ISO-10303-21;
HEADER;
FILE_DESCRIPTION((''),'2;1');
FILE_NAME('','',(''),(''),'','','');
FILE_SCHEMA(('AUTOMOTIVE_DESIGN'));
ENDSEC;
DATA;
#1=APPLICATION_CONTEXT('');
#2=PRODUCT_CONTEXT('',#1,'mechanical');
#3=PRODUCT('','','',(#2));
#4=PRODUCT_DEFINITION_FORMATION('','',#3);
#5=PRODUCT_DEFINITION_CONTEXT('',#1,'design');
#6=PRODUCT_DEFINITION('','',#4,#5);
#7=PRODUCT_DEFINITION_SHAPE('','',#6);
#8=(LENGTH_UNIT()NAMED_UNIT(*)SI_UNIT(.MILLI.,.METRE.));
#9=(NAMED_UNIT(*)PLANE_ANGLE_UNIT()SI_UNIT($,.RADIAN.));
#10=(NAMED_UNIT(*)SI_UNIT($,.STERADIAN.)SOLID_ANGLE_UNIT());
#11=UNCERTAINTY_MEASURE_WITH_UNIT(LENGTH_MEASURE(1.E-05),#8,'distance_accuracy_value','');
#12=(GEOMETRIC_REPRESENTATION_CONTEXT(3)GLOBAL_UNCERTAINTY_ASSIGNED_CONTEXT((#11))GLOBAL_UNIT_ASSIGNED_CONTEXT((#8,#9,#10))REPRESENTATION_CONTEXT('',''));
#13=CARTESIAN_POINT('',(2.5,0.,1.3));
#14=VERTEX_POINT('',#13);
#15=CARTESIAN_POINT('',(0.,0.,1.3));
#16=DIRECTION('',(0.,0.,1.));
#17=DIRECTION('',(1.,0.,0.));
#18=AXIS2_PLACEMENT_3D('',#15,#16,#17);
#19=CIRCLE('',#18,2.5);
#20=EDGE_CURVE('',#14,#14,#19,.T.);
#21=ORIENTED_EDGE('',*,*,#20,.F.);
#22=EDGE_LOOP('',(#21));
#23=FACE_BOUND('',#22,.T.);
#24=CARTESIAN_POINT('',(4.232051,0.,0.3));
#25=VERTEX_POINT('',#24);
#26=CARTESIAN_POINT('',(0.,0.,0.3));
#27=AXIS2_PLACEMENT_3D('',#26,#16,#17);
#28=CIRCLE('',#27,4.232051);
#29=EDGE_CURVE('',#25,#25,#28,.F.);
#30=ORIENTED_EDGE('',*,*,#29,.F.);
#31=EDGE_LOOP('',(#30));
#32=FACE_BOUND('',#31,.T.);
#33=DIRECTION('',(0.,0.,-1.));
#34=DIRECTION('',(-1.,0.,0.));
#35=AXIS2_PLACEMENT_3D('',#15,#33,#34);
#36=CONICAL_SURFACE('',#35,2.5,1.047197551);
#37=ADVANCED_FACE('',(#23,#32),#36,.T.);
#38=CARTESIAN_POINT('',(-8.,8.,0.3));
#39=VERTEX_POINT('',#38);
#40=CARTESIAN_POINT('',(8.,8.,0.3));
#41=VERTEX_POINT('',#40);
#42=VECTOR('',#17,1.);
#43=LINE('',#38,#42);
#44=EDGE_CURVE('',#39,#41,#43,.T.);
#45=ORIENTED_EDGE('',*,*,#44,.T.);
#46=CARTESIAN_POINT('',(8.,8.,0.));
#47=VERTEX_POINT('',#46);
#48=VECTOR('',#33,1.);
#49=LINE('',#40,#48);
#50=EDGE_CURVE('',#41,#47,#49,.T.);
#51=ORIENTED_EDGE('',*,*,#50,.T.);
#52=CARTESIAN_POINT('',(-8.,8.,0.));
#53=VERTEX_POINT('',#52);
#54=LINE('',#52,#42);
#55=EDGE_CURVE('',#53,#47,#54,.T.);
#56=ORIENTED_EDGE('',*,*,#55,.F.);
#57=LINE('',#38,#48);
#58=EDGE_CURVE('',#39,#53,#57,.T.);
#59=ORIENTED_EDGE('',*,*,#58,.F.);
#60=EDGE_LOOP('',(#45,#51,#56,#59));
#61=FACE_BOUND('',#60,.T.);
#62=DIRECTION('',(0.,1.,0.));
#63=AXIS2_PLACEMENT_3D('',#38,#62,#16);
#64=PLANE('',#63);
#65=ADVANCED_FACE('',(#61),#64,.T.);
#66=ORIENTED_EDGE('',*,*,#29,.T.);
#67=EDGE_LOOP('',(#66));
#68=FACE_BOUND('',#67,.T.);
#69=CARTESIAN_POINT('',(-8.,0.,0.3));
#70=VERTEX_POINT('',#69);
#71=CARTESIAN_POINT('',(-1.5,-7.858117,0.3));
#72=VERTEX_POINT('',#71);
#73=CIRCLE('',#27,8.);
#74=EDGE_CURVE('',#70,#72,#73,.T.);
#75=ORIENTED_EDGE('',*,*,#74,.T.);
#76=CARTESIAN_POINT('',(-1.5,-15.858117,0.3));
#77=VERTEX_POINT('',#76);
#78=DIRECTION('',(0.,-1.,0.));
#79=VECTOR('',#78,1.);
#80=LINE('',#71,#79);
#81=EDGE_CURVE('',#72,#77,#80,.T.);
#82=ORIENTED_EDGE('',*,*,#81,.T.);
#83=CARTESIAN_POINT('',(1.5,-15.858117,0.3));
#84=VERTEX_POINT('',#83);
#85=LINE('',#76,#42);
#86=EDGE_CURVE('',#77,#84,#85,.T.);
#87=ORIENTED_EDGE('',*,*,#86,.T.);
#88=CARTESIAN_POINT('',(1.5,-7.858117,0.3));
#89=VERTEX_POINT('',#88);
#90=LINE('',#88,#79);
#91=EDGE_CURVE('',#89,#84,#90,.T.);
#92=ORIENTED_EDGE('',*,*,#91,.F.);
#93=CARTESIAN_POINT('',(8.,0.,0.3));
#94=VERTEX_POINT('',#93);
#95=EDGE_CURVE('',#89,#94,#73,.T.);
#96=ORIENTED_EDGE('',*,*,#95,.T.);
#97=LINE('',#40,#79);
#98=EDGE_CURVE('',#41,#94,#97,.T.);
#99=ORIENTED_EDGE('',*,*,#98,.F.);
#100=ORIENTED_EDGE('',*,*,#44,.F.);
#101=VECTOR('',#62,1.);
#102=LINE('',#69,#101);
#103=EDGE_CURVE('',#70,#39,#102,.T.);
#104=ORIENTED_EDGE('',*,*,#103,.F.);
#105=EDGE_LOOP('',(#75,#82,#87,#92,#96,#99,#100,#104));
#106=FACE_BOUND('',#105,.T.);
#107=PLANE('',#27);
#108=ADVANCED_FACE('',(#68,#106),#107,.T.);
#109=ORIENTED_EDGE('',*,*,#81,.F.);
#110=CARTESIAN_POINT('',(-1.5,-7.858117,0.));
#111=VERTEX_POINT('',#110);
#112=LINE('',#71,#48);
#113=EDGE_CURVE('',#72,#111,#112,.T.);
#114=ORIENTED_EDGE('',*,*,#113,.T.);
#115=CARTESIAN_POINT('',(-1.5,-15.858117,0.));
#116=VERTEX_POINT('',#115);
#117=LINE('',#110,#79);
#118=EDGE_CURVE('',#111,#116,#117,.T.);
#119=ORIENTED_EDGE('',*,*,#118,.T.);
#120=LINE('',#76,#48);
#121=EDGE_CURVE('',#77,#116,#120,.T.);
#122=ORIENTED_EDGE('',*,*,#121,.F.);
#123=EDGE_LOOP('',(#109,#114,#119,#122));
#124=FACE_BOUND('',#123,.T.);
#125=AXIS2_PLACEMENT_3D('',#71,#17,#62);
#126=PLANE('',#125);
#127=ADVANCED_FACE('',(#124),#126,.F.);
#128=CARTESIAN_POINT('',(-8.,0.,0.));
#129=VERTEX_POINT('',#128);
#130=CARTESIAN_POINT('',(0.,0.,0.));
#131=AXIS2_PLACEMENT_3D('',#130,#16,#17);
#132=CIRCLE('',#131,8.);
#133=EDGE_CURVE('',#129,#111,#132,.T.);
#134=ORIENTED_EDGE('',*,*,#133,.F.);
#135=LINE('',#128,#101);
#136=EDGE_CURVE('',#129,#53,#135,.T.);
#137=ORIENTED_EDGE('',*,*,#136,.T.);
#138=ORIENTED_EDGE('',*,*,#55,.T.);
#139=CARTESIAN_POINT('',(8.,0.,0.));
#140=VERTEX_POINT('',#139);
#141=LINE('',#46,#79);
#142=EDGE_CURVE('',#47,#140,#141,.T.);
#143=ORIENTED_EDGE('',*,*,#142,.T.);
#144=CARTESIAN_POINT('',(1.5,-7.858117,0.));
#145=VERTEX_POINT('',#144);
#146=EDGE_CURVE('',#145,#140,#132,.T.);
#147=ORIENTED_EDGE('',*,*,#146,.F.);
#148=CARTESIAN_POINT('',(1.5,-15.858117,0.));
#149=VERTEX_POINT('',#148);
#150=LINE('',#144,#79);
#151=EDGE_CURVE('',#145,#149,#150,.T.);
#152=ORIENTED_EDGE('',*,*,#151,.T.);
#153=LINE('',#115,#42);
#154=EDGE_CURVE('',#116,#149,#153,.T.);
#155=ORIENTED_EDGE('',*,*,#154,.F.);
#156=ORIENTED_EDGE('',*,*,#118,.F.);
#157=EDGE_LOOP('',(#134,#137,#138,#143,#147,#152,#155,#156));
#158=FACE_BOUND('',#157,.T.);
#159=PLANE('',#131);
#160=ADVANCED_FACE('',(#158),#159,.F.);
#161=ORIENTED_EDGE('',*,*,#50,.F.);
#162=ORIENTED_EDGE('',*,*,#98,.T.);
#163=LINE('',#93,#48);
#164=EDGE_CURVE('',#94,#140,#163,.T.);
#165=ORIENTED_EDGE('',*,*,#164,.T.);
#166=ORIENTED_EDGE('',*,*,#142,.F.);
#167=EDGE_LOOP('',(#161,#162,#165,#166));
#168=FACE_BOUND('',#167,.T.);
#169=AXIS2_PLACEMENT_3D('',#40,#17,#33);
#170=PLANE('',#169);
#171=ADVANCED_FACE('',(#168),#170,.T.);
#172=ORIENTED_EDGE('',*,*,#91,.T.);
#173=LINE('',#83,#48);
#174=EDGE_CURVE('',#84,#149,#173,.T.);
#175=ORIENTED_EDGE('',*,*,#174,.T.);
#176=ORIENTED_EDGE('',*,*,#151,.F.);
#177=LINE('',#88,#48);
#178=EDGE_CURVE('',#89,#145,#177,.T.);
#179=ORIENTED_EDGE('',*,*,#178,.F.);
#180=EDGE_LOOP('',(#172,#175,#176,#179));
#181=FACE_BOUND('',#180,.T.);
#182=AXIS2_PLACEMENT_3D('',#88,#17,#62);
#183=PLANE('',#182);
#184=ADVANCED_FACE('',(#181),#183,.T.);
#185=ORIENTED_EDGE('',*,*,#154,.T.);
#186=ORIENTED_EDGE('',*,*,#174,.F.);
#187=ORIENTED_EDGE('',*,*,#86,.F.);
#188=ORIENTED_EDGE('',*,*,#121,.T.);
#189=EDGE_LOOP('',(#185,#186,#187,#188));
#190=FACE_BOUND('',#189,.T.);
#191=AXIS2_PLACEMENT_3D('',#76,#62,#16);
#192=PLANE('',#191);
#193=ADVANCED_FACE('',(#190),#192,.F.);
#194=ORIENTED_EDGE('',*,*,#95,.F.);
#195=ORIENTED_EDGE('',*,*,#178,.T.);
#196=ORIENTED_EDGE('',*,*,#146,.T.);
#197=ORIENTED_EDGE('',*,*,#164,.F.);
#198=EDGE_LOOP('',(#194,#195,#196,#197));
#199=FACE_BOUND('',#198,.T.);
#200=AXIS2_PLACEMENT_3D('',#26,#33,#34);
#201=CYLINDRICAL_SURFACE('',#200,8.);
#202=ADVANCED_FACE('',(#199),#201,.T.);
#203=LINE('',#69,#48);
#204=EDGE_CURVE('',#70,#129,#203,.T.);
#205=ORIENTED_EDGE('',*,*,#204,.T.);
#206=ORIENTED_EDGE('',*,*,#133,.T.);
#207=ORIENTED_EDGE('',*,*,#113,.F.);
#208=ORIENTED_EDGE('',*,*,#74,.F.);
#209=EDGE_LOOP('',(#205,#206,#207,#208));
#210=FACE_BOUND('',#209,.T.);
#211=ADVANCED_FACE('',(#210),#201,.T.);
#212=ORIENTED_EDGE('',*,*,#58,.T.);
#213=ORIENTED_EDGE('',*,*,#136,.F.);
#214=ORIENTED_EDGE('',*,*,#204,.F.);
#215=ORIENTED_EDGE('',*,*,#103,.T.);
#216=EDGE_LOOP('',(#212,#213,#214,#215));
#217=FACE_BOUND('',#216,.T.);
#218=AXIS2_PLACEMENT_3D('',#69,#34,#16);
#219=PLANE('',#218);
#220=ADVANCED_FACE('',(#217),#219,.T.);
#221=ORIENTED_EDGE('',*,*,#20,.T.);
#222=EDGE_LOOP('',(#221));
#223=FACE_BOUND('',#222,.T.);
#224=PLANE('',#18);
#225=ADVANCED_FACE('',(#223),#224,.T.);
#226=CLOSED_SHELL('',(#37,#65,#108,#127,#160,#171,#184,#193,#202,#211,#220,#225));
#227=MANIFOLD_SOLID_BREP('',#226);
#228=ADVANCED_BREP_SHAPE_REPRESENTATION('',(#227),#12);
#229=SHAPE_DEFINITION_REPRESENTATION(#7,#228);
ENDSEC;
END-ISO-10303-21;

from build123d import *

# Parameters (mm, degrees)
EXTRUDE_1_DEPTH  = 0.3
SKETCH_2_R       = 2.5
EXTRUDE_2_DEPTH  = 1
CHAMFER_1_SIZE   = 1.732050808
CHAMFER_1_SIZE_2 = 1


with BuildPart() as part:
    # 草图1 → 凸台-拉伸1 (new body)
    with BuildSketch(Plane.XY):
        with BuildLine():
            Line((-8, 0), (-8, 8))
            Line((-8, 8), (8, 8))
            Line((8, 8), (8, 0))
            ThreePointArc((8, 0), (6.164414003, -5.099019514), (1.5, -7.858116823))
            Line((1.5, -7.858116823), (1.5, -15.858116823))
            Line((1.5, -15.858116823), (-1.5, -15.858116823))
            Line((-1.5, -15.858116823), (-1.5, -7.858116823))
            ThreePointArc((-1.5, -7.858116823), (-6.164414003, -5.099019514), (-8, 0))
        make_face()
    extrude(amount=EXTRUDE_1_DEPTH)

    # 草图2 → 凸台-拉伸2 (add)
    with BuildSketch(Plane.XY.offset(0.3)):
        Circle(SKETCH_2_R)
    extrude(amount=EXTRUDE_2_DEPTH)

    # 倒角1
    # the kernel refuses this chamfer: 1.732050808, 1 mm, written as the material it adds along each edge
    with BuildSketch(Plane(origin=(0, 0, 0.3), x_dir=(1, 0, 0), z_dir=(0, -1, 0))) as chamfer_1_piece_1_section:
        Polygon((2.5 + CHAMFER_1_SIZE, 0), (2.5, CHAMFER_1_SIZE_2), (2.5, 0), align=None)
    chamfer_1_piece_1 = revolve(axis=Axis((0, 0, 0.3), (0, 0, 1)), mode=Mode.PRIVATE)
    chamfer_1_piece_1 = split(chamfer_1_piece_1, bisect_by=Plane(origin=(-3.382683679, 0, 1.3), z_dir=(0, 0, -1)), keep=Keep.TOP, mode=Mode.PRIVATE)
    add(chamfer_1_piece_1)


solid = part.part
